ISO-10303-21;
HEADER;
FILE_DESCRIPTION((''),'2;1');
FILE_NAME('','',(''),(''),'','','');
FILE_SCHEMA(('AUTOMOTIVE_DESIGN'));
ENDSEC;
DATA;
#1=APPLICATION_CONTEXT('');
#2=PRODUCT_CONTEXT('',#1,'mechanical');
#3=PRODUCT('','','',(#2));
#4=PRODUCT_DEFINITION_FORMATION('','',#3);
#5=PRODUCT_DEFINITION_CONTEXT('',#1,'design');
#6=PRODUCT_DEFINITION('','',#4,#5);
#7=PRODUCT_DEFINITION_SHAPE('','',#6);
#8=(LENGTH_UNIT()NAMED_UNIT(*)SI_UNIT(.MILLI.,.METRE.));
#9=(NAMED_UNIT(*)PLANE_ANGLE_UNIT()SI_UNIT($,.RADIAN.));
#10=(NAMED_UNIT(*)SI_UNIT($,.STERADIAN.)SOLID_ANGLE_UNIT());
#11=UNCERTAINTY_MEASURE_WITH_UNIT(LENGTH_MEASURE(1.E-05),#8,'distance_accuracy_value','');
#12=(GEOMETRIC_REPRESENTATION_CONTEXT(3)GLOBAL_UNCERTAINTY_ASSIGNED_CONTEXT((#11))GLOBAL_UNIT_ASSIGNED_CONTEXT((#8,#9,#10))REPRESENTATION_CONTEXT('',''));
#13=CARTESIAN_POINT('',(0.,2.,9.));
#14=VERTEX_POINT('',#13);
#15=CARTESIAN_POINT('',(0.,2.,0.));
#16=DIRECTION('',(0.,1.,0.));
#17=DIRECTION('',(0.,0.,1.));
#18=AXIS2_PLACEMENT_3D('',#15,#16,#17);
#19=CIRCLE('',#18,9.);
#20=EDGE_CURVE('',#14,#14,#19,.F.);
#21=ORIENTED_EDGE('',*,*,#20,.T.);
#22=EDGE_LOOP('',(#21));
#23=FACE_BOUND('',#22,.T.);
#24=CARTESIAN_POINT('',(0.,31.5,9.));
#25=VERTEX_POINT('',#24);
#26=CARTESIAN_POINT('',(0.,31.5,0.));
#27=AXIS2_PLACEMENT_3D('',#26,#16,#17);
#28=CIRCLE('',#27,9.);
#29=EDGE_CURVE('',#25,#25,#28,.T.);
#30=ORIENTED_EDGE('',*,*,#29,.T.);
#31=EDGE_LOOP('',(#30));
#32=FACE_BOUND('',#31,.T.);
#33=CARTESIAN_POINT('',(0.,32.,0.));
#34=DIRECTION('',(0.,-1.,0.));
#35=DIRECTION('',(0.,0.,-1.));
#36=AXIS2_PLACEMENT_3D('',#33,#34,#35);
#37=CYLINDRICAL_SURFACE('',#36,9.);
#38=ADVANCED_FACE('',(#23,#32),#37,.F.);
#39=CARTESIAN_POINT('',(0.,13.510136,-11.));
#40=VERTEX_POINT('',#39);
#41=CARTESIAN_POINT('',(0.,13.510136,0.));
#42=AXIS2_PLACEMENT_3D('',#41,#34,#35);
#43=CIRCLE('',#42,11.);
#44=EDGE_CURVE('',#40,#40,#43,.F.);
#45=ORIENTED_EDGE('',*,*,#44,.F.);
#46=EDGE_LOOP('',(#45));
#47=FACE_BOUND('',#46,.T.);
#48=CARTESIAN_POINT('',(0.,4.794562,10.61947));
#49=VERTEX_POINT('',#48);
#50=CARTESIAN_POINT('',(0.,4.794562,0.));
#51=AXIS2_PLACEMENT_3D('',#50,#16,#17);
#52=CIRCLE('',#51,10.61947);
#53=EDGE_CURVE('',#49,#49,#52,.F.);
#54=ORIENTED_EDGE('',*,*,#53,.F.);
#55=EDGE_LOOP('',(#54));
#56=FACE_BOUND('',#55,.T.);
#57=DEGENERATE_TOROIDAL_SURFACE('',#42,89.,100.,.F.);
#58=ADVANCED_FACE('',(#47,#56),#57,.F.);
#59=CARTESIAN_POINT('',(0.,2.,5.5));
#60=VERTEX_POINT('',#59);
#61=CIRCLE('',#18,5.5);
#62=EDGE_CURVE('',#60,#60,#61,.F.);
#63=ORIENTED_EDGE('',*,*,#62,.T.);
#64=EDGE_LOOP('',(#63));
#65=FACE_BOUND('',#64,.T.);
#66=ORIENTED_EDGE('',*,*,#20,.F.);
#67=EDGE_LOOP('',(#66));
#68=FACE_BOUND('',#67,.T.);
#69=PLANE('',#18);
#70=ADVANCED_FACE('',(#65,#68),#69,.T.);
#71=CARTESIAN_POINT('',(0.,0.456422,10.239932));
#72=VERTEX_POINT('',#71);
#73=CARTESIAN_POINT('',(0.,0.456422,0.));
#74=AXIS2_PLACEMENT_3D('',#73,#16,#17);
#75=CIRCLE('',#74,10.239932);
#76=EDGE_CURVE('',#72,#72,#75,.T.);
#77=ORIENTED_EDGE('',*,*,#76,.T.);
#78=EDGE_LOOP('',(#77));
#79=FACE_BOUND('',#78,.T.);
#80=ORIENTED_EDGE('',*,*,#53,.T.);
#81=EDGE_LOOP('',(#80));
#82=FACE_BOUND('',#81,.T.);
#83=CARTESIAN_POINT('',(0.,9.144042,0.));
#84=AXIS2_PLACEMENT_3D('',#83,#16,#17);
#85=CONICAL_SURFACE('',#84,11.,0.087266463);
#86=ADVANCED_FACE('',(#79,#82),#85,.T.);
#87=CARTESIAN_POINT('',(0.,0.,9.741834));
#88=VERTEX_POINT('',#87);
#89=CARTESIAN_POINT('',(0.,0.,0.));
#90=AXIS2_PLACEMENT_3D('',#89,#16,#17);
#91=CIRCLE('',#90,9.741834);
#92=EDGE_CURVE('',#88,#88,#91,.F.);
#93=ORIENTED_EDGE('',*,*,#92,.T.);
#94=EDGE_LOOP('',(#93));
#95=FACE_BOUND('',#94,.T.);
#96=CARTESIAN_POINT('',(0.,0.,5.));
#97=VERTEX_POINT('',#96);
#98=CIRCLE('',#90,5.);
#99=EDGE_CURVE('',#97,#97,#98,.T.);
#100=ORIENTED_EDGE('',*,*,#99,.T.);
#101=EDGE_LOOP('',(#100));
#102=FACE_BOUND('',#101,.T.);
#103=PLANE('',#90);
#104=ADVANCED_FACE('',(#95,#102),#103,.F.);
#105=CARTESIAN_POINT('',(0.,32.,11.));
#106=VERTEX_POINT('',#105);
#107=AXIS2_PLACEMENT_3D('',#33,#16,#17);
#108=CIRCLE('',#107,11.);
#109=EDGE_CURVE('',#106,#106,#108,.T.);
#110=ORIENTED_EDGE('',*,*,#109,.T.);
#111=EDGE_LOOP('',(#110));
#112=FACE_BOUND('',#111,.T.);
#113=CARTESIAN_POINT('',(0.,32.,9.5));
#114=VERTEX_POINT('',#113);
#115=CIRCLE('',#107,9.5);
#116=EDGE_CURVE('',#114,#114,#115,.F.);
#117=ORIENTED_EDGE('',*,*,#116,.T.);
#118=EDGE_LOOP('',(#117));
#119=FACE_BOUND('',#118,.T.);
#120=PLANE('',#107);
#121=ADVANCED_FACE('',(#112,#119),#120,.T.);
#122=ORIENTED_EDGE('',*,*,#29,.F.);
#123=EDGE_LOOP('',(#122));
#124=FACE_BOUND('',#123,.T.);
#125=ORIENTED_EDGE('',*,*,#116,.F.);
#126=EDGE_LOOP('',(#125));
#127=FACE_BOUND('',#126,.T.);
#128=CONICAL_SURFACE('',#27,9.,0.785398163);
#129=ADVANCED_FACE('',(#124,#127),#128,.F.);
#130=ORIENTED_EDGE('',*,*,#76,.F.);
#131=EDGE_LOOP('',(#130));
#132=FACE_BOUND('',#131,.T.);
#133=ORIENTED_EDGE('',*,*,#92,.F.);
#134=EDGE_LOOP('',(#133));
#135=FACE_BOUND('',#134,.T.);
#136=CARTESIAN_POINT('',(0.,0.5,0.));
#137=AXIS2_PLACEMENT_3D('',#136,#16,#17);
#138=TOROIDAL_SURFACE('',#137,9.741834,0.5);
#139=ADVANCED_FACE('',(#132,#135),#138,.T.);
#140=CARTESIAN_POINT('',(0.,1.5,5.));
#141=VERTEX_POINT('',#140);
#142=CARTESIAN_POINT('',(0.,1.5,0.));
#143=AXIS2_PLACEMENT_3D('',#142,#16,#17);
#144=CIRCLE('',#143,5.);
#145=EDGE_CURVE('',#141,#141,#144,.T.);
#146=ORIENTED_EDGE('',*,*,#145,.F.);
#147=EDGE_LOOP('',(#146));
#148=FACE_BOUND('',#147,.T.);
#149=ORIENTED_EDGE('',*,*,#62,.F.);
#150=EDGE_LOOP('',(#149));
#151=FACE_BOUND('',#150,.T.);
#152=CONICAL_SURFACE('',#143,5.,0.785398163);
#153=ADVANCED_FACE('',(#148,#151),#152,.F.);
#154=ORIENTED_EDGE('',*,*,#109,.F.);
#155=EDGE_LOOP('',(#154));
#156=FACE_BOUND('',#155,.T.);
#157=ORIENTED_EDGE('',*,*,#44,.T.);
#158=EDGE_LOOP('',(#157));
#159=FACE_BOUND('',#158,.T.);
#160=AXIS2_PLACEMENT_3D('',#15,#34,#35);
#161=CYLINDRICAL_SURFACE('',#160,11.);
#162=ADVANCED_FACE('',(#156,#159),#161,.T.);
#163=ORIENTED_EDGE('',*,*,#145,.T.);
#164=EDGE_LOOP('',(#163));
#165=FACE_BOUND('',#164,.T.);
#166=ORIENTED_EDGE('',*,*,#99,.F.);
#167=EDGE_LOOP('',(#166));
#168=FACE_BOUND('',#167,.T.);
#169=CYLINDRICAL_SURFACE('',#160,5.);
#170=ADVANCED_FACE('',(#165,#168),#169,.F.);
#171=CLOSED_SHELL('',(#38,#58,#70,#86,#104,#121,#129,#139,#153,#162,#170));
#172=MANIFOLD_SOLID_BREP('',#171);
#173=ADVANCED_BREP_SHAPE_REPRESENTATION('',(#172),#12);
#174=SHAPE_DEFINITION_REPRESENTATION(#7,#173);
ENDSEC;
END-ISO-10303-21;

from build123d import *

# Parameters (mm, degrees)
SKETCH1_R           = 11
SKETCH1_R_2         = 5
BOSS_EXTRUDE1_DEPTH = 2
SKETCH2_R           = 11
SKETCH2_R_2         = 9
BOSS_EXTRUDE2_DEPTH = 30
CHAMFER1_SIZE       = 0.8
CHAMFER1_SIZE2      = 9.144041842
CHAMFER2_SIZE       = 0.5
FILLET1_R           = 0.5
FILLET2_R           = 100
CHAMFER3_SIZE       = 0.5


with BuildPart() as part:
    # Sketch1 → Boss-Extrude1 (new body)
    with BuildSketch(Plane(origin=(0, 0, 0), x_dir=(1, 0, 0), z_dir=(0, 1, 0))):
        with Locations(Location((0, 0, 0), (0, 0, 270))):
            Circle(SKETCH1_R)
        with Locations(Location((0, 0, 0), (0, 0, 270))):
            Circle(SKETCH1_R_2, mode=Mode.SUBTRACT)
    extrude(amount=BOSS_EXTRUDE1_DEPTH)

    # Sketch2 → Boss-Extrude2 (add)
    with BuildSketch(Plane(origin=(0, 2, 0), x_dir=(1, 0, 0), z_dir=(0, 1, 0))):
        with Locations(Location((0, 0, 0), (0, 0, 270))):
            Circle(SKETCH2_R)
        with Locations(Location((0, 0, 0), (0, 0, 270))):
            Circle(SKETCH2_R_2, mode=Mode.SUBTRACT)
    extrude(amount=BOSS_EXTRUDE2_DEPTH)

    # Chamfer1
    chamfer1_edges = [part.edges().sort_by_distance(p)[0] for p in [
        (0, 0, -11),
    ]]
    chamfer1_side = [part.faces().sort_by_distance(p)[0] for p in [
        (0, 0, -10.688873016),
    ]]
    chamfer(chamfer1_edges, length=CHAMFER1_SIZE, length2=CHAMFER1_SIZE2, reference=chamfer1_side[0])

    # Chamfer2
    chamfer2_edges = [part.edges().sort_by_distance(p)[0] for p in [
        (0, 32, -9),
    ]]
    chamfer(chamfer2_edges, length=CHAMFER2_SIZE)

    # Fillet1
    fillet1_edges = [part.edges().sort_by_distance(p)[0] for p in [
        (0, 0, -10.2),
    ]]
    fillet(fillet1_edges, radius=FILLET1_R)

    # Fillet2
    # the kernel refuses this fillet: 100 mm, written as the material it takes off along each edge
    with BuildSketch(Plane(origin=(0, 9.144041842, 0), x_dir=(0, 0, 1), z_dir=(-1, 0, 0))) as fillet2_piece_1:
        with BuildLine():
            CenterArc((11 - FILLET2_R, FILLET2_R * 0.0436609429085), FILLET2_R, 355, 5)
            Line((11, FILLET2_R * 0.0436609429085), (11, 0))
            Line((11, 0), (11 - FILLET2_R * 0.00380530190825, -FILLET2_R * 0.0434947998391))
        make_face()
    revolve(axis=Axis((0, 9.144041842, 0), (0, 1, 0)), mode=Mode.SUBTRACT)

    # Chamfer3
    chamfer3_edges = [part.edges().sort_by_distance(p)[0] for p in [
        (0, 2, -5),
    ]]
    chamfer(chamfer3_edges, length=CHAMFER3_SIZE)


solid = part.part
